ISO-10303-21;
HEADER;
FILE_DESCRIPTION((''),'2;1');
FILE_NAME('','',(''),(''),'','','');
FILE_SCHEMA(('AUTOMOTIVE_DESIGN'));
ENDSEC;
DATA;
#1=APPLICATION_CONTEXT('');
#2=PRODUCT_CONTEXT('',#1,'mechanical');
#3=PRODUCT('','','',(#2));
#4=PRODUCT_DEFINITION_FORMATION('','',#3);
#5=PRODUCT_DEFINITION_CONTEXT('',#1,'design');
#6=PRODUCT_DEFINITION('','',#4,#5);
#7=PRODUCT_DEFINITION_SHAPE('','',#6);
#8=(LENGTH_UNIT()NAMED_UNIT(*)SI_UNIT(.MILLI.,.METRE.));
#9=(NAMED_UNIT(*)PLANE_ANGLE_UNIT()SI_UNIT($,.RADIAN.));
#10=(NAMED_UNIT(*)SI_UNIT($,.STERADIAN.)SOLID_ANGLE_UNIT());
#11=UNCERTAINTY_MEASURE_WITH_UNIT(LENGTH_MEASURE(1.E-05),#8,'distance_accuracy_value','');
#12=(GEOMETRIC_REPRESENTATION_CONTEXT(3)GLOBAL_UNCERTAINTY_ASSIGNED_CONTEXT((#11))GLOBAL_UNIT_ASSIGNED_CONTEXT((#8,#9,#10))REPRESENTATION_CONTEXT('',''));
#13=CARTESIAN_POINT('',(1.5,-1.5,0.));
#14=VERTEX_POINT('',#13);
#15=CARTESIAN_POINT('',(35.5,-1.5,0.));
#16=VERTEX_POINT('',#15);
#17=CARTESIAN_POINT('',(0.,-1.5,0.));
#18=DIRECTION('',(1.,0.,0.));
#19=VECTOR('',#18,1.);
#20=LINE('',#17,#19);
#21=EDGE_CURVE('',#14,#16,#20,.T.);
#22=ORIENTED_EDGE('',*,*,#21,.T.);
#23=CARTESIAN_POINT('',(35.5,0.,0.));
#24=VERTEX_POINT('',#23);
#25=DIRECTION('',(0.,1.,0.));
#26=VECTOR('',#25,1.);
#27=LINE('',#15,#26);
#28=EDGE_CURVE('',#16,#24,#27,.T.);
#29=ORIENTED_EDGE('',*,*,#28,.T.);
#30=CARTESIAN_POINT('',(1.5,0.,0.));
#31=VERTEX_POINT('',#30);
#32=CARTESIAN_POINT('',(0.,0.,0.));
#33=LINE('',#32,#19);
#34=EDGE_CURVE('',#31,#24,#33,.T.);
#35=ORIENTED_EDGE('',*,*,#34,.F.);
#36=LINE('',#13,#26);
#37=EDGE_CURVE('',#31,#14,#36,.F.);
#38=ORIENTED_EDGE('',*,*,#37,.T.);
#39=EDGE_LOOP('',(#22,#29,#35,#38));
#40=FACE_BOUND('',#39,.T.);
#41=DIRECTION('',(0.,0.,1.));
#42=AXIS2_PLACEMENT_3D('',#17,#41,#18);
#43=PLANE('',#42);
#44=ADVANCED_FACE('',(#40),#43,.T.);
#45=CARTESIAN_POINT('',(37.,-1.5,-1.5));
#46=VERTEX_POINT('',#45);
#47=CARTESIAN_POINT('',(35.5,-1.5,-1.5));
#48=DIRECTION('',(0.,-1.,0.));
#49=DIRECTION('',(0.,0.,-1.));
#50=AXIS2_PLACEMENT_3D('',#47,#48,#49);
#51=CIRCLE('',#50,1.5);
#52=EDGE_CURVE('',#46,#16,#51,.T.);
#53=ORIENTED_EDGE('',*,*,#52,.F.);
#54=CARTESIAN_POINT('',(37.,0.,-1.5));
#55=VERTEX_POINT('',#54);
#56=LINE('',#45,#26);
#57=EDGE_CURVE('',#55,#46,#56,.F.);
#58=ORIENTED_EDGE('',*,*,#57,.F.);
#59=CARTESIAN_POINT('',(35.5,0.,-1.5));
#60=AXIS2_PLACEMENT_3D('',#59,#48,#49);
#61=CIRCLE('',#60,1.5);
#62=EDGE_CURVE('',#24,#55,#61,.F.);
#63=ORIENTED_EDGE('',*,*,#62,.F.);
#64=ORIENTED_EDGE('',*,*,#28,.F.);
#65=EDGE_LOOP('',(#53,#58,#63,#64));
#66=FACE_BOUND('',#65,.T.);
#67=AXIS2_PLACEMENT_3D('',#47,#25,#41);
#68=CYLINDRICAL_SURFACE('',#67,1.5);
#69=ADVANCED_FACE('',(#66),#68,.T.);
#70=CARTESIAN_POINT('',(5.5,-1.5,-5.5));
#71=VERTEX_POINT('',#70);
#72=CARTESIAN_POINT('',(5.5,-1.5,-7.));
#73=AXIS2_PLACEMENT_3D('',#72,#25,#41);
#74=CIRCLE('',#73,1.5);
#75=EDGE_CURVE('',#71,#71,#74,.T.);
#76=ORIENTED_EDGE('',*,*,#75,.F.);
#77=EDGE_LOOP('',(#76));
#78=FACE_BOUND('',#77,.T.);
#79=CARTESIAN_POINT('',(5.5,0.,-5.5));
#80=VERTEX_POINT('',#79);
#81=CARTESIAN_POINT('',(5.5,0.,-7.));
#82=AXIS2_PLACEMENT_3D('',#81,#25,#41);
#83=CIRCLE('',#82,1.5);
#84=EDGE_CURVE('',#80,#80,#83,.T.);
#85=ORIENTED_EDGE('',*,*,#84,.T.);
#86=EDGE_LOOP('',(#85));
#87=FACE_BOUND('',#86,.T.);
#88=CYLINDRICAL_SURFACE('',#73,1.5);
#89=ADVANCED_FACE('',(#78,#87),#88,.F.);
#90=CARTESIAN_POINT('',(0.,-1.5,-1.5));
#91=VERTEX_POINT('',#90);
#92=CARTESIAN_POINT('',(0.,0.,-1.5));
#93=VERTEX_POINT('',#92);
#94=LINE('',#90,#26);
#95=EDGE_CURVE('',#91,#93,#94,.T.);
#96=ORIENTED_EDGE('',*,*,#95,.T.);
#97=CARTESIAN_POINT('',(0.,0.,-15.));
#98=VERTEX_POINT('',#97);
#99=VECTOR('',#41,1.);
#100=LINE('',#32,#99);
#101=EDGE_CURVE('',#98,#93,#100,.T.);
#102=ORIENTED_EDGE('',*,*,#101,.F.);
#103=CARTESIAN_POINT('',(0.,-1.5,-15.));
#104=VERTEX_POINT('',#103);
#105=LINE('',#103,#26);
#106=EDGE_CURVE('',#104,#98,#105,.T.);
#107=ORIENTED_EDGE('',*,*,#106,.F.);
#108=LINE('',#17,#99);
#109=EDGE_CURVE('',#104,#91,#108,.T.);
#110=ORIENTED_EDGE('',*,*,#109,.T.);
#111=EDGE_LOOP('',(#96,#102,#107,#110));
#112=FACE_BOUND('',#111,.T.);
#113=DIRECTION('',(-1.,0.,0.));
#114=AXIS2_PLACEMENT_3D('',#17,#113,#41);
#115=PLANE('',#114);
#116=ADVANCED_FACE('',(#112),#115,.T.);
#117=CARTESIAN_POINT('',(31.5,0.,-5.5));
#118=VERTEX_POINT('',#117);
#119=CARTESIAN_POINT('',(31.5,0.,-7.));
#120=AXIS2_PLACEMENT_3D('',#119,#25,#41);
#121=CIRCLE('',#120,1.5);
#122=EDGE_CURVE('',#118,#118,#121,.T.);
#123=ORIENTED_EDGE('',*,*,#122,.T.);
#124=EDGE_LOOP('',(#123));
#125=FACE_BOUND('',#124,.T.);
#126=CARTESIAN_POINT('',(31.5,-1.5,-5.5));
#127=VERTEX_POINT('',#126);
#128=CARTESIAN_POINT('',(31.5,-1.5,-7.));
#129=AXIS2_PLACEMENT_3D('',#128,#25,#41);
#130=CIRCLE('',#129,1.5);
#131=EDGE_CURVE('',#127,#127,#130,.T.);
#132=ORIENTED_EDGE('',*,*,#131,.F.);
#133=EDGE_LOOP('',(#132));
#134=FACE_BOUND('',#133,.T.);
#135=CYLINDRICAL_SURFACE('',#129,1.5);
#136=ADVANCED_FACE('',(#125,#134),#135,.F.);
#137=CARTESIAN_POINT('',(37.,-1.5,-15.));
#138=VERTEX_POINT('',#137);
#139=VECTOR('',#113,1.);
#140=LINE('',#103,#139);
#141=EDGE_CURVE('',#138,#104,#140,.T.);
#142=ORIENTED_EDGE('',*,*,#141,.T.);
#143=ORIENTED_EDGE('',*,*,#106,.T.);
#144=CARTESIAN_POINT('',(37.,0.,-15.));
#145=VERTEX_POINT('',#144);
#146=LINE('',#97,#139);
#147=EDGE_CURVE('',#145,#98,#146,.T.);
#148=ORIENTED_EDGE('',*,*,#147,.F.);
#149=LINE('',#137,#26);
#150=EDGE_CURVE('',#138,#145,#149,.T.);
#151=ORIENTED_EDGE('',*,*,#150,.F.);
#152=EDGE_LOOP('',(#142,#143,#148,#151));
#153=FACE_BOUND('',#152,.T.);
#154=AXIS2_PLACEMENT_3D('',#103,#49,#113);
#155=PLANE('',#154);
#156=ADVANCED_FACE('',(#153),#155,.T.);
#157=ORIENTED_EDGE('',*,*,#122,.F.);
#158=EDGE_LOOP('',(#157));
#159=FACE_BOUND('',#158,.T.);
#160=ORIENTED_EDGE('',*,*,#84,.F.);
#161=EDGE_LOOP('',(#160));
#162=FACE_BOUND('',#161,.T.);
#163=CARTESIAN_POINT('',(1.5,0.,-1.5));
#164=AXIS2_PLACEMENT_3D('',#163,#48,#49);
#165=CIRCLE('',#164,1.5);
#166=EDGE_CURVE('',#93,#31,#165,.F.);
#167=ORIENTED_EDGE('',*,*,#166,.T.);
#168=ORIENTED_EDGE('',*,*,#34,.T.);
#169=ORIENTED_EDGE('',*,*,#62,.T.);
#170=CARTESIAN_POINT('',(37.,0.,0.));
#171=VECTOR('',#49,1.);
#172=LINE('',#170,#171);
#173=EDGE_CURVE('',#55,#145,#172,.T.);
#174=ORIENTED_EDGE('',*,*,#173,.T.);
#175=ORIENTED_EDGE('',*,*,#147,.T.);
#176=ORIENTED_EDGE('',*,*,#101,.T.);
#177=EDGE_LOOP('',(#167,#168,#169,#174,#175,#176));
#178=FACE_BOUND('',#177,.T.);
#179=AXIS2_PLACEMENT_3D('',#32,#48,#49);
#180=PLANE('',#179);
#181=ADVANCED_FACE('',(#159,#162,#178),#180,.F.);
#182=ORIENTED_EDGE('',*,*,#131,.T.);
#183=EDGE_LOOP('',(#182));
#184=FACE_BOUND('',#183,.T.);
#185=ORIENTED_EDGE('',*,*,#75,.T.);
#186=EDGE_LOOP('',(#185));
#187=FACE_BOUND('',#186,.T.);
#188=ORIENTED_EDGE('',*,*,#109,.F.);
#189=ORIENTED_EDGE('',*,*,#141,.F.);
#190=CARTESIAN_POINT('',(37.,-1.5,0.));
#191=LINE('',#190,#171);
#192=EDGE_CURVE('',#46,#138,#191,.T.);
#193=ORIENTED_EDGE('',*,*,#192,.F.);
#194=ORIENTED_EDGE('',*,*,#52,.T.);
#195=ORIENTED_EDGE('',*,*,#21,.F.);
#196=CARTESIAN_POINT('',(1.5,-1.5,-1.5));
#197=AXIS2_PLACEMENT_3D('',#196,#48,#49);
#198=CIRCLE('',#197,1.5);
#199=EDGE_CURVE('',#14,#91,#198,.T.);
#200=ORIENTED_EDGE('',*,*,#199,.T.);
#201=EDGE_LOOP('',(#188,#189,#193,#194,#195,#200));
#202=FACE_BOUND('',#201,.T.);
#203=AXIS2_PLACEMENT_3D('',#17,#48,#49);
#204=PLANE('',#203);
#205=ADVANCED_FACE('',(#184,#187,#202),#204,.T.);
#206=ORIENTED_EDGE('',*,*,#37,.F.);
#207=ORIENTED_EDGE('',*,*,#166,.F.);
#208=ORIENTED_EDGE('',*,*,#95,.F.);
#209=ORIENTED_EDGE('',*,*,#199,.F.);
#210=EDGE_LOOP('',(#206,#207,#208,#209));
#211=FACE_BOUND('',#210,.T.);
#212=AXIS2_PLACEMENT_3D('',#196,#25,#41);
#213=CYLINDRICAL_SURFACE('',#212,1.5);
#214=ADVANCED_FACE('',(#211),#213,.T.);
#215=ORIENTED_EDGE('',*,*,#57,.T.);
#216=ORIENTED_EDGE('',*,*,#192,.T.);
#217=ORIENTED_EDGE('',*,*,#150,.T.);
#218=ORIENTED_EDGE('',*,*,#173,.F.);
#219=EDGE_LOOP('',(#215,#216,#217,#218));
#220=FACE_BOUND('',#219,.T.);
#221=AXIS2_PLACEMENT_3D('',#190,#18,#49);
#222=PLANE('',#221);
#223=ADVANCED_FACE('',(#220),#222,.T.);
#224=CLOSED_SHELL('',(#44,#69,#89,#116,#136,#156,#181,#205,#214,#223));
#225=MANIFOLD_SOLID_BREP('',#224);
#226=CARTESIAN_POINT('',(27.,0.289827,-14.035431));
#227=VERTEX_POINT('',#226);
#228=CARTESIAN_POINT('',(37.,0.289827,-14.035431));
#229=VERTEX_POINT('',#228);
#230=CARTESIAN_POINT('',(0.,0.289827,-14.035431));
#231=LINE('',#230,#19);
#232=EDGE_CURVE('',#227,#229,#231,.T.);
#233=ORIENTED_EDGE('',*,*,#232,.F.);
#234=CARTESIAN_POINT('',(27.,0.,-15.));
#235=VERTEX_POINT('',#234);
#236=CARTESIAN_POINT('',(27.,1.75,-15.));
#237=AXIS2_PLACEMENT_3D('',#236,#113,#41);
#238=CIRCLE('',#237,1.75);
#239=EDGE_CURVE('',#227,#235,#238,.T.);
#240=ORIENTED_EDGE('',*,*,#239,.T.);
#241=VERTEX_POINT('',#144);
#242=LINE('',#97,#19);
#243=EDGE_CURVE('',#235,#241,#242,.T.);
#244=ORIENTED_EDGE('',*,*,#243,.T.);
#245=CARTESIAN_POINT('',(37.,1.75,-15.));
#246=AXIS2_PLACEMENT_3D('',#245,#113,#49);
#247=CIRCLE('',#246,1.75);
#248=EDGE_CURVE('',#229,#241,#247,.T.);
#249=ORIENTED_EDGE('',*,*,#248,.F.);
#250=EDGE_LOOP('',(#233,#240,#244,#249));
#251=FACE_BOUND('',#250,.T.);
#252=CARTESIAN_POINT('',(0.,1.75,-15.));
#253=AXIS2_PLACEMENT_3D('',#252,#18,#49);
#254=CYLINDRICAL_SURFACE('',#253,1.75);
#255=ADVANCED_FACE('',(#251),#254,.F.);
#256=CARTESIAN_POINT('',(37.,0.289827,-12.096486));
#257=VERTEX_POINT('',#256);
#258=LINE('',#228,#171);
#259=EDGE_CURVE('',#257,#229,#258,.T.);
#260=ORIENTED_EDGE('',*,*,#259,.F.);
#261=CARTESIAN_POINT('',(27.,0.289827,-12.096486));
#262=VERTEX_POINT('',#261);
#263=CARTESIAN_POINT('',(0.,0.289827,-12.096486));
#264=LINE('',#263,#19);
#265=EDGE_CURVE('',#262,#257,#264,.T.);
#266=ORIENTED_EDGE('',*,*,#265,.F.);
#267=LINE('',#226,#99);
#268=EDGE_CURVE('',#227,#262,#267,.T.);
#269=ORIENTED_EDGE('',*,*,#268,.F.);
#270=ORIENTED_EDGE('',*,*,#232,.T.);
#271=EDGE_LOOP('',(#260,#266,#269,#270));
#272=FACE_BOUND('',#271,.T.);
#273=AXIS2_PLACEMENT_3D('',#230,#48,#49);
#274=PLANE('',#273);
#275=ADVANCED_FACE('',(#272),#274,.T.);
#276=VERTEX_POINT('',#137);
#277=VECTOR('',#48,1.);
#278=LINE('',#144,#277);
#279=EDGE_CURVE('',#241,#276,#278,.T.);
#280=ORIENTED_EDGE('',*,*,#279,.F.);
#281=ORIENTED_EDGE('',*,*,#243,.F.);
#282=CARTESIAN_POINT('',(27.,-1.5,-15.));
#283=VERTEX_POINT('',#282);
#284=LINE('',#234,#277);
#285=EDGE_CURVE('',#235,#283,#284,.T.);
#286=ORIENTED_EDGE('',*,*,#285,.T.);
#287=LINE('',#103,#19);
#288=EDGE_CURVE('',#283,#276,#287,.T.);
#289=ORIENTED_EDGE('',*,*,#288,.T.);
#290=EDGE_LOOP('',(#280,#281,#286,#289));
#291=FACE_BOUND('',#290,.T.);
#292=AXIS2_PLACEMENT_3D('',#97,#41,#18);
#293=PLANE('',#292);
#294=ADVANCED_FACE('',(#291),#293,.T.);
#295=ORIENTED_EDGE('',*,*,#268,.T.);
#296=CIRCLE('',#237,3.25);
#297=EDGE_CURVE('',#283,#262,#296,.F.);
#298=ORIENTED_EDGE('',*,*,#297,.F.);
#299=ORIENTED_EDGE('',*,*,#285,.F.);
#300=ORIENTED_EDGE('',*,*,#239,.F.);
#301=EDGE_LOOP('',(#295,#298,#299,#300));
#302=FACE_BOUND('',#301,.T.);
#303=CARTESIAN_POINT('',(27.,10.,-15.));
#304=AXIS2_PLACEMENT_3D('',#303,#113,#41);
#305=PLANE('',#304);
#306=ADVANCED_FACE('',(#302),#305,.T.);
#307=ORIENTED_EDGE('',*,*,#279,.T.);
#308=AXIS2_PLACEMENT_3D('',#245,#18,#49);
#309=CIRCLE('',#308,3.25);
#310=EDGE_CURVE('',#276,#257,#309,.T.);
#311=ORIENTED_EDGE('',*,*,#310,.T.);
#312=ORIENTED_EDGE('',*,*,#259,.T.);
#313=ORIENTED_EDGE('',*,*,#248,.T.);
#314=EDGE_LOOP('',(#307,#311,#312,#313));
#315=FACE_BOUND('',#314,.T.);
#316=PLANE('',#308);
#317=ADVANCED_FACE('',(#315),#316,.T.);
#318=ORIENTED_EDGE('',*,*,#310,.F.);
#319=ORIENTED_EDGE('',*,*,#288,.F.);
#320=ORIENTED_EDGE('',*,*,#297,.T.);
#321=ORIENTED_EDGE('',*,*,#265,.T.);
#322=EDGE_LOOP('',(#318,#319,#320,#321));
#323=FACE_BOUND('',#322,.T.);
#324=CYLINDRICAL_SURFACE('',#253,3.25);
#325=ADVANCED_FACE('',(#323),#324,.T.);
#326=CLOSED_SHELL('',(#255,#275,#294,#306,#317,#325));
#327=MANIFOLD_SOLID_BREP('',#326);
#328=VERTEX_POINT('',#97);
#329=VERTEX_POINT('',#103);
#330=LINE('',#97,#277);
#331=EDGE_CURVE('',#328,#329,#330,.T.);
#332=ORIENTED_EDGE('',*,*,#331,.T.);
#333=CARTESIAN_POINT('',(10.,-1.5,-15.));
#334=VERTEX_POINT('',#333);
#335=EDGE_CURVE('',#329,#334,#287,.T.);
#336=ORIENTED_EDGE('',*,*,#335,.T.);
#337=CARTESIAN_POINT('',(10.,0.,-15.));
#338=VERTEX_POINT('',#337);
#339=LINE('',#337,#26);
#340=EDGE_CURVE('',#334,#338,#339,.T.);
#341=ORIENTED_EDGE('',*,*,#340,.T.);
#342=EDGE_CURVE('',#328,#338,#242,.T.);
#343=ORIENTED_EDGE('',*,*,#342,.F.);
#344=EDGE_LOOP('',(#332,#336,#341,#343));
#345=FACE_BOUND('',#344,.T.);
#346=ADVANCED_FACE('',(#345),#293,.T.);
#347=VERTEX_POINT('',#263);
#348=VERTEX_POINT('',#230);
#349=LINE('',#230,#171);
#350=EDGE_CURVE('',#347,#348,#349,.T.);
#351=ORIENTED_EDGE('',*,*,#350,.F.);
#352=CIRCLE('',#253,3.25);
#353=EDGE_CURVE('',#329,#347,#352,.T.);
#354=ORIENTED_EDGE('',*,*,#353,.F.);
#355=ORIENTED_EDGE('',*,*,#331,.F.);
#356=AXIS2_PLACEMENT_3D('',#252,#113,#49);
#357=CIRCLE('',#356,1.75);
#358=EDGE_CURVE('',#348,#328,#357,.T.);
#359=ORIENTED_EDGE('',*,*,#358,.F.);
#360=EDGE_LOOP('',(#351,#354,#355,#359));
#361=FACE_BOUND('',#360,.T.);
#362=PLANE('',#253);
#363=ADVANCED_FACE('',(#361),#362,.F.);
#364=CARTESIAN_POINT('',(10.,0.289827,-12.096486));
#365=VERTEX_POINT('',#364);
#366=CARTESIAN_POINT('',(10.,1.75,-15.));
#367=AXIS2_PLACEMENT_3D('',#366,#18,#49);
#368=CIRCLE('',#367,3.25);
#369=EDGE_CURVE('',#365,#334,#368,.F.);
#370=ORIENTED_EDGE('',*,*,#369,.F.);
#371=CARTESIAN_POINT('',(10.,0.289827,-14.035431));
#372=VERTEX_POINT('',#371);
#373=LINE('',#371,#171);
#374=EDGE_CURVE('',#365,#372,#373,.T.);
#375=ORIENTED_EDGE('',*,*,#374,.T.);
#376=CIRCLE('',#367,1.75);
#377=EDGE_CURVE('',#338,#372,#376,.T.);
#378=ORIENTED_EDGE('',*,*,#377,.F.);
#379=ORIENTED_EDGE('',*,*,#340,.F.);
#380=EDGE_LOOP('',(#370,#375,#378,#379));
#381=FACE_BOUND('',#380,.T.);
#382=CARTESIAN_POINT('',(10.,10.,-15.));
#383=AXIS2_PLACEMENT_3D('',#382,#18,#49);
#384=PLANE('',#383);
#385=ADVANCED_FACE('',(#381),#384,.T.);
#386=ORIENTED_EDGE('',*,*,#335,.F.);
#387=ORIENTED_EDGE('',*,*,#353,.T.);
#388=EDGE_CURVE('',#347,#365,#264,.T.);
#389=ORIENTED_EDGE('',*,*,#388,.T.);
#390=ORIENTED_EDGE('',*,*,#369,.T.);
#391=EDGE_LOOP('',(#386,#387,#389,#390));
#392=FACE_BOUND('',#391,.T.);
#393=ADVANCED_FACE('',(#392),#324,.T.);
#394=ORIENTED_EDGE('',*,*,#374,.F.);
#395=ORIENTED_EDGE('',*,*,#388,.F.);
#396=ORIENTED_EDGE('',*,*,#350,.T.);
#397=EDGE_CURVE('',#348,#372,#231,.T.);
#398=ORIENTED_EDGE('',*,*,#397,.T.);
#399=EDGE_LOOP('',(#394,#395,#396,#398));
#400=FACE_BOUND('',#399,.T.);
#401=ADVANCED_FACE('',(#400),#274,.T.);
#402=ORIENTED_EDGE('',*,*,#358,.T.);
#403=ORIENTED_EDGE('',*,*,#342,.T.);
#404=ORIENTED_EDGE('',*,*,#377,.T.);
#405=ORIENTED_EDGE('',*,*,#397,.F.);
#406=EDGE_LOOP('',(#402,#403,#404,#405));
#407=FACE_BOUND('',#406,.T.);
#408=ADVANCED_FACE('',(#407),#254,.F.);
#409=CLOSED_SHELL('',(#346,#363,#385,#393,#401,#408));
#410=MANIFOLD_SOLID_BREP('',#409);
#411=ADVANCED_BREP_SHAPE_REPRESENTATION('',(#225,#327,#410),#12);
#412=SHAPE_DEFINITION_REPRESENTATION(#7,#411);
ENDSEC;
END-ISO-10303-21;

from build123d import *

# Parameters (mm, degrees)
SKETCH_1_W               = 37
SKETCH_1_H               = 15
SKETCH_1_R               = 1.5
SM_BASE_FLANGE_1_DEPTH   = 1.5
SM_BASE_FLANGE_2_DEPTH   = 37
CUT_EXTRUDE_2_DEPTH      = 10
CUT_EXTRUDE_2_DEPTH_BACK = 10
SKETCH_9_W               = 17
SKETCH_9_H               = 10.169597845
SKETCH_16_W              = 17
SKETCH_16_H              = 8.366120423
CUT_EXTRUDE_3_DEPTH      = 10
FILLET_2_R               = 1.5


# Sheet-metal steps are written as plain solids
with BuildPart() as part:
    # Sketch 1 → 基体-法兰1 (new body)
    with BuildSketch(Plane(origin=(0, 0, 0), x_dir=(1, 0, 0), z_dir=(0, 1, 0))):
        with Locations((18.5, 7.5)):
            Rectangle(SKETCH_1_W, SKETCH_1_H)
        with Locations(Location((5.5, 7, 0), (0, 0, 270))):
            Circle(SKETCH_1_R, mode=Mode.SUBTRACT)
        with Locations(Location((31.5, 7, 0), (0, 0, 270))):
            Circle(SKETCH_1_R, mode=Mode.SUBTRACT)
    extrude(amount=-SM_BASE_FLANGE_1_DEPTH)

    # 圆角2
    fillet_2_edges = [part.edges().sort_by_distance(p)[0] for p in [
        (37, -0.75, 0),
        (0, -0.75, 0),
    ]]
    fillet(fillet_2_edges, radius=FILLET_2_R)


with BuildPart() as body_2:
    # 草图6 → 基体-法兰2 (new body)
    with BuildSketch(Plane(origin=(37, 0, 0), x_dir=(0, 0, -1), z_dir=(1, 0, 0))):
        with BuildLine():
            Line((15, 0), (15, -1.5))
            ThreePointArc((15, -1.5), (16.705423269, 4.516592032), (12.09648589, 0.289826786))
            Line((12.09648589, 0.289826786), (14.03543057, 0.289826786))
            ThreePointArc((14.03543057, 0.289826786), (13.324022207, 2.253585582), (15, 3.5))
            ThreePointArc((15, 3.5), (16.75, 1.75), (15, 0))
        make_face()
    extrude(amount=-SM_BASE_FLANGE_2_DEPTH)

    # 草图9 → 切除-拉伸2 (cut, two sides: drawn at the far end of the back side and taken through both)
    with BuildSketch(Plane(origin=(0, 0, 0), x_dir=(1, 0, 0), z_dir=(0, 1, 0)).offset(-CUT_EXTRUDE_2_DEPTH_BACK)):
        with Locations((18.5, 20.084798923)):
            Rectangle(SKETCH_9_W, SKETCH_9_H)
    extrude(amount=CUT_EXTRUDE_2_DEPTH + CUT_EXTRUDE_2_DEPTH_BACK, mode=Mode.SUBTRACT)

    # 草图16 → 切除-拉伸3 (cut)
    with BuildSketch(Plane(origin=(0, 0, -15), x_dir=(-1, 0, 0), z_dir=(0, 0, -1))):
        with Locations((-18.5, 4.183060211)):
            Rectangle(SKETCH_16_W, SKETCH_16_H)
    extrude(amount=-CUT_EXTRUDE_3_DEPTH, mode=Mode.SUBTRACT)


with BuildPart() as cut_extrude_3_piece_1:
    # of the separate pieces the step leaves, piece 1, a body of its own (cut_extrude_3_pieces)
    add(body_2.part.solids().sort_by_distance((37, 0, -15))[0])


with BuildPart() as cut_extrude_3_piece_2:
    # of the separate pieces the step leaves, piece 2, a body of its own (cut_extrude_3_pieces)
    add(body_2.part.solids().sort_by_distance((10, 0, -15))[0])


solid = Compound([part.part, cut_extrude_3_piece_1.part, cut_extrude_3_piece_2.part])
